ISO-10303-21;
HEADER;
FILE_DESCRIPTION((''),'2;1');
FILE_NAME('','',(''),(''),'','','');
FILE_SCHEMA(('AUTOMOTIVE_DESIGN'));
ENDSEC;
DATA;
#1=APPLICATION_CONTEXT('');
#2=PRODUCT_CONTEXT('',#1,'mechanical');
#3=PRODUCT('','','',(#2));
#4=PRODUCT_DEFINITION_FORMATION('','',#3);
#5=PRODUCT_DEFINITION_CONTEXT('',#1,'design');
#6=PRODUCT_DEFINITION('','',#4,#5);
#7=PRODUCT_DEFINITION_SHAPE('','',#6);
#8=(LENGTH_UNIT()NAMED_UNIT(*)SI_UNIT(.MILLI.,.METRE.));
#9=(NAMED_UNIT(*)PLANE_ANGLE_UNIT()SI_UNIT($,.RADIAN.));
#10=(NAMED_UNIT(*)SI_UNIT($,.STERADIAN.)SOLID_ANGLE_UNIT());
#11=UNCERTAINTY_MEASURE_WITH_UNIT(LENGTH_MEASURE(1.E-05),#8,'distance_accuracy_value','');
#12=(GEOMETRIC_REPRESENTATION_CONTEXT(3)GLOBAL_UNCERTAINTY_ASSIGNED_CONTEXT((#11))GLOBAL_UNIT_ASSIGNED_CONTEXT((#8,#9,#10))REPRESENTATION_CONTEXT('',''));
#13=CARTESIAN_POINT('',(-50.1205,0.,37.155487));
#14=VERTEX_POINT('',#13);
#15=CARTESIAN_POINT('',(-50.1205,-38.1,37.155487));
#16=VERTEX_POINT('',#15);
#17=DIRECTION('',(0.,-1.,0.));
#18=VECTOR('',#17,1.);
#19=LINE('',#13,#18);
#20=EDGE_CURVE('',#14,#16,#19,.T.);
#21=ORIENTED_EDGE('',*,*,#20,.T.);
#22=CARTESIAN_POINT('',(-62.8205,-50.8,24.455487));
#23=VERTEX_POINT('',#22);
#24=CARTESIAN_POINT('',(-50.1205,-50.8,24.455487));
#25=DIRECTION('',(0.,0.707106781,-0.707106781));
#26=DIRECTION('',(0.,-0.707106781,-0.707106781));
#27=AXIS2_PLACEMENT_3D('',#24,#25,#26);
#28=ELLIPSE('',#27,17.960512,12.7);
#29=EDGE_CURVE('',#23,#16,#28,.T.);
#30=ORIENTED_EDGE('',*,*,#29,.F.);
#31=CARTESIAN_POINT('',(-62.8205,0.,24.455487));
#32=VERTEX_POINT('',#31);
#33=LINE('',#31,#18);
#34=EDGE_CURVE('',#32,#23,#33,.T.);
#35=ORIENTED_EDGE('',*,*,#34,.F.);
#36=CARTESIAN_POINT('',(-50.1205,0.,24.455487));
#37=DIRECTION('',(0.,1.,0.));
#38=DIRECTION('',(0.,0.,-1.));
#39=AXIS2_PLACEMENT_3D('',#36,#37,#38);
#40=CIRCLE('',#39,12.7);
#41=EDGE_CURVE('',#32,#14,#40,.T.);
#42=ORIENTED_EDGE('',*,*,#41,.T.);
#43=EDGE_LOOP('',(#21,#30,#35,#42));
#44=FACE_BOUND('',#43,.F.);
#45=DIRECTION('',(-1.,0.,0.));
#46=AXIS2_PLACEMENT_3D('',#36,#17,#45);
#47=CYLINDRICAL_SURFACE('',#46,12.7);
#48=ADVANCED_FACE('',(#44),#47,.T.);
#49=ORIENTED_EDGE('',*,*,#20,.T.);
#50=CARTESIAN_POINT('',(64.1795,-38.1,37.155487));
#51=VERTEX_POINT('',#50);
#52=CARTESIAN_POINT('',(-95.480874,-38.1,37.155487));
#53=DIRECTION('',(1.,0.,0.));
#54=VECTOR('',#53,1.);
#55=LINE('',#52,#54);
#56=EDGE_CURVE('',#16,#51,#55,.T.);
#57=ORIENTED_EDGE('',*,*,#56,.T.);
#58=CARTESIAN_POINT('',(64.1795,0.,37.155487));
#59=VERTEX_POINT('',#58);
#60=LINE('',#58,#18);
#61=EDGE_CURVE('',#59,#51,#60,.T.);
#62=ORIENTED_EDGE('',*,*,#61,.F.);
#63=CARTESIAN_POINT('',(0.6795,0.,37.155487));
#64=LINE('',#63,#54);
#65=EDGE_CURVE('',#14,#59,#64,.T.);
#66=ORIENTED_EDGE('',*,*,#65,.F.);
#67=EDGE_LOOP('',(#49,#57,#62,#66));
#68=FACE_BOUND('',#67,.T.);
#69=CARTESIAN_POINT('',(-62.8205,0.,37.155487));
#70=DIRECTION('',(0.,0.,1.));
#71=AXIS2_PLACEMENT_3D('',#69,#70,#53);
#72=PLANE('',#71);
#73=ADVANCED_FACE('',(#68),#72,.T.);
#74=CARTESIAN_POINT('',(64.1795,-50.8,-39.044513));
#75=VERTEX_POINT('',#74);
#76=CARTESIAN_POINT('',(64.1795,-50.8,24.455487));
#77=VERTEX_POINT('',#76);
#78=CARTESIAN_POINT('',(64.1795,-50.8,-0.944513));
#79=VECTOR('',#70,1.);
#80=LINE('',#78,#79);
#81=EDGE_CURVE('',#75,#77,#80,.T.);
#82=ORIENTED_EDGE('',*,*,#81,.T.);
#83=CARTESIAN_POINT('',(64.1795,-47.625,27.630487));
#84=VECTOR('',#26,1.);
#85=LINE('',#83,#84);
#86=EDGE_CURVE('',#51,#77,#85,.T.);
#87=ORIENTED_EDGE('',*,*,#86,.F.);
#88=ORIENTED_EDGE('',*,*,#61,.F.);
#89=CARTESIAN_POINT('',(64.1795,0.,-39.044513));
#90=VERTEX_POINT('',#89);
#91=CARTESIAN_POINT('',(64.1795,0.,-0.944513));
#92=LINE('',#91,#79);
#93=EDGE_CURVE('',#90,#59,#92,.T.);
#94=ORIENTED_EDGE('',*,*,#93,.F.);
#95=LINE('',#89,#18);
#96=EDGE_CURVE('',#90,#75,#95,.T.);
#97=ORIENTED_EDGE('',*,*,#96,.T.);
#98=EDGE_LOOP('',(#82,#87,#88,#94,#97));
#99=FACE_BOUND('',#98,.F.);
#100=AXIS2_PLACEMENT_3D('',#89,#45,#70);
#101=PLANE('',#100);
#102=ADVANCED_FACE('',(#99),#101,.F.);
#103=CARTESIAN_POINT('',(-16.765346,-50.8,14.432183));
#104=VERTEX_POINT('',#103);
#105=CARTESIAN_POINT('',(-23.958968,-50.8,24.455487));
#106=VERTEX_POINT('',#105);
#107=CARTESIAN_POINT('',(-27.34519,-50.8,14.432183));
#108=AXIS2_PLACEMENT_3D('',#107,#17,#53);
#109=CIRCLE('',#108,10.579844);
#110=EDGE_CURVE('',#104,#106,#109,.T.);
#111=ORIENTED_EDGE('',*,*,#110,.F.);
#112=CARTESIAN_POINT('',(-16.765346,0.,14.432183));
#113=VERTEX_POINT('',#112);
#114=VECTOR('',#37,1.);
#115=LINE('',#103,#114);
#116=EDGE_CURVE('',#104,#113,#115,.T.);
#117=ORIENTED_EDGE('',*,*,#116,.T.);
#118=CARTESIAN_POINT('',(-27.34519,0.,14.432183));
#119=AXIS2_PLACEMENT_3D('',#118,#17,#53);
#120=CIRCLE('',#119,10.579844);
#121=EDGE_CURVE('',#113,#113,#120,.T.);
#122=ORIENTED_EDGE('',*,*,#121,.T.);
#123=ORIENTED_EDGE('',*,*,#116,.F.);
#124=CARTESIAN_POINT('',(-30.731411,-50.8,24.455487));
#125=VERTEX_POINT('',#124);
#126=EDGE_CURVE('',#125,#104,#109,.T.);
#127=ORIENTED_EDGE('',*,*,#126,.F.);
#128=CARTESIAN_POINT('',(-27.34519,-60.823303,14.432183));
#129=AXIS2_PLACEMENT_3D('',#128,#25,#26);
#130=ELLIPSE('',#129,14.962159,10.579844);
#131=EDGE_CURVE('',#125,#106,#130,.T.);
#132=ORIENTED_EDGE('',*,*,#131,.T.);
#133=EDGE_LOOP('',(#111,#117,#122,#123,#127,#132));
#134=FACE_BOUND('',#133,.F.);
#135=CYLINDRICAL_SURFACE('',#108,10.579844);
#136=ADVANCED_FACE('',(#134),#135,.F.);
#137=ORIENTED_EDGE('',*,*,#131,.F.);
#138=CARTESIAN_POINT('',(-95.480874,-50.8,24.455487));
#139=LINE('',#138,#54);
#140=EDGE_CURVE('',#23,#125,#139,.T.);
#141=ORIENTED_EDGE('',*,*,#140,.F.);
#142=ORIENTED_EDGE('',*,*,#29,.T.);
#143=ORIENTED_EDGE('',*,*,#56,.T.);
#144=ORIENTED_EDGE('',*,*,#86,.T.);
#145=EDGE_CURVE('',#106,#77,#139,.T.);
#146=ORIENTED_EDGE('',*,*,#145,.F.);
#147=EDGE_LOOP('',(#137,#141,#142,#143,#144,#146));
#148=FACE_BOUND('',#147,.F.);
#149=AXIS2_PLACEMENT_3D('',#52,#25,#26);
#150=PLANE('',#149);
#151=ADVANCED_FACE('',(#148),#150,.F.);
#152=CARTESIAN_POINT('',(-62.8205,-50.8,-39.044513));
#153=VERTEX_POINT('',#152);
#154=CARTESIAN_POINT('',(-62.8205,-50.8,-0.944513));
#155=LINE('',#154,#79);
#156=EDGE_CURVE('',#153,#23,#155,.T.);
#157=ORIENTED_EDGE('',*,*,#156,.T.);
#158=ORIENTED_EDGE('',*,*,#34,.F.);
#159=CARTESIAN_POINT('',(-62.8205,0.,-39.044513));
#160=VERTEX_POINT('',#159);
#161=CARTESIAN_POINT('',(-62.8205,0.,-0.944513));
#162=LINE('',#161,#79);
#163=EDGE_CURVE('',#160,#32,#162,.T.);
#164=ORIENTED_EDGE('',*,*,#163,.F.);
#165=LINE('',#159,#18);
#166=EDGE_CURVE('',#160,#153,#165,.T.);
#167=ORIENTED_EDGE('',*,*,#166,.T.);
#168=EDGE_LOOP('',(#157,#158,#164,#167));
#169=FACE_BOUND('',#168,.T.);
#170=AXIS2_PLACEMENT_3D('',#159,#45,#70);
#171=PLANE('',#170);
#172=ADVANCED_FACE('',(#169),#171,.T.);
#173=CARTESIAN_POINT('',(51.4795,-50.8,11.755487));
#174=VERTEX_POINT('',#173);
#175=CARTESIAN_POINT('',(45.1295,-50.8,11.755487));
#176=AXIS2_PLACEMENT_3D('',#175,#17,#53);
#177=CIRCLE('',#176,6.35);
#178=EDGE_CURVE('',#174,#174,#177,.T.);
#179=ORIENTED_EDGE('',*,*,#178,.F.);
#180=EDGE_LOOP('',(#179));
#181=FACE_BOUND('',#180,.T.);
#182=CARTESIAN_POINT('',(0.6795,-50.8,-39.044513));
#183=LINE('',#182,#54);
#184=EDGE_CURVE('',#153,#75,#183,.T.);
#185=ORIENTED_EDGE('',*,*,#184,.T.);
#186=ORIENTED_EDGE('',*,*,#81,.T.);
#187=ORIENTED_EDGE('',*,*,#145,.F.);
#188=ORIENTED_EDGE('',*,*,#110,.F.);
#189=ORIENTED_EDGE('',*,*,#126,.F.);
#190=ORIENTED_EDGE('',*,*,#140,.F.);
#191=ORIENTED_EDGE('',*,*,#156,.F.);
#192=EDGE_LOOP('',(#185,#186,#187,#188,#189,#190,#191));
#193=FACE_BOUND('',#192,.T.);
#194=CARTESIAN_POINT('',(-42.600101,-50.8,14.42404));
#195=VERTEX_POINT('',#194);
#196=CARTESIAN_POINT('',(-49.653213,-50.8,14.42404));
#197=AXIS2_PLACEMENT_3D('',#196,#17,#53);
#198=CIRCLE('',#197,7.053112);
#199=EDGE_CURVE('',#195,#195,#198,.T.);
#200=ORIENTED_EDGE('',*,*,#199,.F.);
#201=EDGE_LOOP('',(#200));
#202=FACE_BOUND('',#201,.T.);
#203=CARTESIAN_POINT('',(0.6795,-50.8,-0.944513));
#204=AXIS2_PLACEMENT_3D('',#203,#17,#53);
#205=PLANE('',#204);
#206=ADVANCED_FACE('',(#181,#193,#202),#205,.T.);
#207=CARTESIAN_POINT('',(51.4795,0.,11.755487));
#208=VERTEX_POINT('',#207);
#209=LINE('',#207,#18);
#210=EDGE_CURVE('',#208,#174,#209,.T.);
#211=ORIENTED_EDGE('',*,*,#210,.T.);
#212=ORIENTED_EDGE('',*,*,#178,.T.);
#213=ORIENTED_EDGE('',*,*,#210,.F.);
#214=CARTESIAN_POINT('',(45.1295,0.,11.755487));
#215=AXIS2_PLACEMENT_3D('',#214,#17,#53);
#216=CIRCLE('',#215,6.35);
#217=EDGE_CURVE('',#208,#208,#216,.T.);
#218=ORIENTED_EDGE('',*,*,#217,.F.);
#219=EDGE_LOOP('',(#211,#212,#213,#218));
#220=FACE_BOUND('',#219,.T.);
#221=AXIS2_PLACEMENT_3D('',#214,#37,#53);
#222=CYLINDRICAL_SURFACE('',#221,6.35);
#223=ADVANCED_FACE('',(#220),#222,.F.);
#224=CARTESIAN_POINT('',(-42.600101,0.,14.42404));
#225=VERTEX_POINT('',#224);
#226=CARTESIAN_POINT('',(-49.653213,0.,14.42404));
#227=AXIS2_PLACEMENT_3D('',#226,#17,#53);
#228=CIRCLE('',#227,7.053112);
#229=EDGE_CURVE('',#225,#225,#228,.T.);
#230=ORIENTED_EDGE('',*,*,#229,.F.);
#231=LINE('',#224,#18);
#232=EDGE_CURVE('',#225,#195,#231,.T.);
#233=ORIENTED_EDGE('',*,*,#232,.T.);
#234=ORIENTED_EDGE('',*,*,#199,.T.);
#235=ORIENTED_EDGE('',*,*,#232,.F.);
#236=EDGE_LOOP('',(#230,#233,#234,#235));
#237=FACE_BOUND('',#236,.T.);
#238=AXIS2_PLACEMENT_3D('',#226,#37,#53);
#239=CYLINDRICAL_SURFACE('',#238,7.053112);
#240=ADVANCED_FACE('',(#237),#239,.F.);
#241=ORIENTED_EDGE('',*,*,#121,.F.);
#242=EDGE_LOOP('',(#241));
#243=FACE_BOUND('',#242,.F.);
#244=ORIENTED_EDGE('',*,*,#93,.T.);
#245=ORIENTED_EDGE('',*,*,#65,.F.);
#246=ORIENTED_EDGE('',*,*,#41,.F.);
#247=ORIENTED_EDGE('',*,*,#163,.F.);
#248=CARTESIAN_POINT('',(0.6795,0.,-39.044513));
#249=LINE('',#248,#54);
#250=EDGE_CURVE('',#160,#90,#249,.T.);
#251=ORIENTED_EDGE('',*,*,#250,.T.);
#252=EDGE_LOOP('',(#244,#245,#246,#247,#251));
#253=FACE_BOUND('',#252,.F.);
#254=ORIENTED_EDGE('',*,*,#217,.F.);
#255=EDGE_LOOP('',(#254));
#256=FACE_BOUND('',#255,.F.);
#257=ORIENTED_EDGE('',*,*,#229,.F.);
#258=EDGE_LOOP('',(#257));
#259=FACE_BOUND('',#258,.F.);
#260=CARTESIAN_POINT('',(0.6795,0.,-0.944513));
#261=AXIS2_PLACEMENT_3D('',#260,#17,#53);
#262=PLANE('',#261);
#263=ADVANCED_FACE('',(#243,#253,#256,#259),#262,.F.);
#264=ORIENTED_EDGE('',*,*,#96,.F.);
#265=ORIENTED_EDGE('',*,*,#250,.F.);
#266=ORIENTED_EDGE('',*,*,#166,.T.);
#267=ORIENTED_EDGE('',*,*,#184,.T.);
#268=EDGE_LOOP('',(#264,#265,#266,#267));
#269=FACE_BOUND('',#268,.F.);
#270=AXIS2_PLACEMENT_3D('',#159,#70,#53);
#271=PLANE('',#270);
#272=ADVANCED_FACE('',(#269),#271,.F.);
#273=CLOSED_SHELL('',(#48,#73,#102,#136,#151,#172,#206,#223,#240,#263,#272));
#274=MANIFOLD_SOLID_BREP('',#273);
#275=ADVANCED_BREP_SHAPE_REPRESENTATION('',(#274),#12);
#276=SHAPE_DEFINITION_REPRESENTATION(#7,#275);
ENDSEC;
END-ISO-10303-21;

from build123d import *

# Parameters (mm, degrees)
F0_W        = 127
F0_H        = 76.2
F0_R        = 7.0531122836
F0_R_2      = 6.35
F1_DEPTH    = 50.8
F2_R        = 10.5798439837
F3_DEPTH    = 86.868
F4_T1_DEPTH = 192.3207478943
F5_R        = 12.7


# Not quite as in the source:
# - a fillet or chamfer that OpenCascade refuses, or shapes differently, is made with other operations: its cross-section is extruded or revolved along the edge and cut away or added


with BuildPart() as f1:
    # F0 (on Front) → F1 (new body)
    with BuildSketch(Plane.XZ):
        with Locations((0.679500401, -0.9445134997)):
            Rectangle(F0_W, F0_H)
        with Locations((-49.6532134712, 14.4240399823)):
            Circle(F0_R, mode=Mode.SUBTRACT)
        with Locations((45.129500401, 11.7554865003)):
            Circle(F0_R_2, mode=Mode.SUBTRACT)
    extrude(amount=F1_DEPTH)

    # F2 (on face) → F3 (cut)
    with BuildSketch(Plane.XZ.offset(50.8)):
        with Locations((-27.3451898247, 14.4321834669)):
            Circle(F2_R)
    extrude(amount=-F3_DEPTH, mode=Mode.SUBTRACT)

    # F4: chamfer of 12.7 on 1 edges, made by hand

    # F4_s2 → F4_t1 (cut)
    with BuildSketch(Plane.YZ.offset(-95.4808735461)):
        Polygon((-38.1, 37.1554865003), (-50.8, 24.4554865003), (-50.8, 37.1554865003), align=None)
    extrude(amount=F4_T1_DEPTH, mode=Mode.SUBTRACT)

    # F5
    f5_edges = [f1.edges().sort_by_distance(p)[0] for p in [
        (-62.8205, -19.05, 37.155487),
    ]]
    fillet(f5_edges, radius=F5_R)


solid = f1.part
